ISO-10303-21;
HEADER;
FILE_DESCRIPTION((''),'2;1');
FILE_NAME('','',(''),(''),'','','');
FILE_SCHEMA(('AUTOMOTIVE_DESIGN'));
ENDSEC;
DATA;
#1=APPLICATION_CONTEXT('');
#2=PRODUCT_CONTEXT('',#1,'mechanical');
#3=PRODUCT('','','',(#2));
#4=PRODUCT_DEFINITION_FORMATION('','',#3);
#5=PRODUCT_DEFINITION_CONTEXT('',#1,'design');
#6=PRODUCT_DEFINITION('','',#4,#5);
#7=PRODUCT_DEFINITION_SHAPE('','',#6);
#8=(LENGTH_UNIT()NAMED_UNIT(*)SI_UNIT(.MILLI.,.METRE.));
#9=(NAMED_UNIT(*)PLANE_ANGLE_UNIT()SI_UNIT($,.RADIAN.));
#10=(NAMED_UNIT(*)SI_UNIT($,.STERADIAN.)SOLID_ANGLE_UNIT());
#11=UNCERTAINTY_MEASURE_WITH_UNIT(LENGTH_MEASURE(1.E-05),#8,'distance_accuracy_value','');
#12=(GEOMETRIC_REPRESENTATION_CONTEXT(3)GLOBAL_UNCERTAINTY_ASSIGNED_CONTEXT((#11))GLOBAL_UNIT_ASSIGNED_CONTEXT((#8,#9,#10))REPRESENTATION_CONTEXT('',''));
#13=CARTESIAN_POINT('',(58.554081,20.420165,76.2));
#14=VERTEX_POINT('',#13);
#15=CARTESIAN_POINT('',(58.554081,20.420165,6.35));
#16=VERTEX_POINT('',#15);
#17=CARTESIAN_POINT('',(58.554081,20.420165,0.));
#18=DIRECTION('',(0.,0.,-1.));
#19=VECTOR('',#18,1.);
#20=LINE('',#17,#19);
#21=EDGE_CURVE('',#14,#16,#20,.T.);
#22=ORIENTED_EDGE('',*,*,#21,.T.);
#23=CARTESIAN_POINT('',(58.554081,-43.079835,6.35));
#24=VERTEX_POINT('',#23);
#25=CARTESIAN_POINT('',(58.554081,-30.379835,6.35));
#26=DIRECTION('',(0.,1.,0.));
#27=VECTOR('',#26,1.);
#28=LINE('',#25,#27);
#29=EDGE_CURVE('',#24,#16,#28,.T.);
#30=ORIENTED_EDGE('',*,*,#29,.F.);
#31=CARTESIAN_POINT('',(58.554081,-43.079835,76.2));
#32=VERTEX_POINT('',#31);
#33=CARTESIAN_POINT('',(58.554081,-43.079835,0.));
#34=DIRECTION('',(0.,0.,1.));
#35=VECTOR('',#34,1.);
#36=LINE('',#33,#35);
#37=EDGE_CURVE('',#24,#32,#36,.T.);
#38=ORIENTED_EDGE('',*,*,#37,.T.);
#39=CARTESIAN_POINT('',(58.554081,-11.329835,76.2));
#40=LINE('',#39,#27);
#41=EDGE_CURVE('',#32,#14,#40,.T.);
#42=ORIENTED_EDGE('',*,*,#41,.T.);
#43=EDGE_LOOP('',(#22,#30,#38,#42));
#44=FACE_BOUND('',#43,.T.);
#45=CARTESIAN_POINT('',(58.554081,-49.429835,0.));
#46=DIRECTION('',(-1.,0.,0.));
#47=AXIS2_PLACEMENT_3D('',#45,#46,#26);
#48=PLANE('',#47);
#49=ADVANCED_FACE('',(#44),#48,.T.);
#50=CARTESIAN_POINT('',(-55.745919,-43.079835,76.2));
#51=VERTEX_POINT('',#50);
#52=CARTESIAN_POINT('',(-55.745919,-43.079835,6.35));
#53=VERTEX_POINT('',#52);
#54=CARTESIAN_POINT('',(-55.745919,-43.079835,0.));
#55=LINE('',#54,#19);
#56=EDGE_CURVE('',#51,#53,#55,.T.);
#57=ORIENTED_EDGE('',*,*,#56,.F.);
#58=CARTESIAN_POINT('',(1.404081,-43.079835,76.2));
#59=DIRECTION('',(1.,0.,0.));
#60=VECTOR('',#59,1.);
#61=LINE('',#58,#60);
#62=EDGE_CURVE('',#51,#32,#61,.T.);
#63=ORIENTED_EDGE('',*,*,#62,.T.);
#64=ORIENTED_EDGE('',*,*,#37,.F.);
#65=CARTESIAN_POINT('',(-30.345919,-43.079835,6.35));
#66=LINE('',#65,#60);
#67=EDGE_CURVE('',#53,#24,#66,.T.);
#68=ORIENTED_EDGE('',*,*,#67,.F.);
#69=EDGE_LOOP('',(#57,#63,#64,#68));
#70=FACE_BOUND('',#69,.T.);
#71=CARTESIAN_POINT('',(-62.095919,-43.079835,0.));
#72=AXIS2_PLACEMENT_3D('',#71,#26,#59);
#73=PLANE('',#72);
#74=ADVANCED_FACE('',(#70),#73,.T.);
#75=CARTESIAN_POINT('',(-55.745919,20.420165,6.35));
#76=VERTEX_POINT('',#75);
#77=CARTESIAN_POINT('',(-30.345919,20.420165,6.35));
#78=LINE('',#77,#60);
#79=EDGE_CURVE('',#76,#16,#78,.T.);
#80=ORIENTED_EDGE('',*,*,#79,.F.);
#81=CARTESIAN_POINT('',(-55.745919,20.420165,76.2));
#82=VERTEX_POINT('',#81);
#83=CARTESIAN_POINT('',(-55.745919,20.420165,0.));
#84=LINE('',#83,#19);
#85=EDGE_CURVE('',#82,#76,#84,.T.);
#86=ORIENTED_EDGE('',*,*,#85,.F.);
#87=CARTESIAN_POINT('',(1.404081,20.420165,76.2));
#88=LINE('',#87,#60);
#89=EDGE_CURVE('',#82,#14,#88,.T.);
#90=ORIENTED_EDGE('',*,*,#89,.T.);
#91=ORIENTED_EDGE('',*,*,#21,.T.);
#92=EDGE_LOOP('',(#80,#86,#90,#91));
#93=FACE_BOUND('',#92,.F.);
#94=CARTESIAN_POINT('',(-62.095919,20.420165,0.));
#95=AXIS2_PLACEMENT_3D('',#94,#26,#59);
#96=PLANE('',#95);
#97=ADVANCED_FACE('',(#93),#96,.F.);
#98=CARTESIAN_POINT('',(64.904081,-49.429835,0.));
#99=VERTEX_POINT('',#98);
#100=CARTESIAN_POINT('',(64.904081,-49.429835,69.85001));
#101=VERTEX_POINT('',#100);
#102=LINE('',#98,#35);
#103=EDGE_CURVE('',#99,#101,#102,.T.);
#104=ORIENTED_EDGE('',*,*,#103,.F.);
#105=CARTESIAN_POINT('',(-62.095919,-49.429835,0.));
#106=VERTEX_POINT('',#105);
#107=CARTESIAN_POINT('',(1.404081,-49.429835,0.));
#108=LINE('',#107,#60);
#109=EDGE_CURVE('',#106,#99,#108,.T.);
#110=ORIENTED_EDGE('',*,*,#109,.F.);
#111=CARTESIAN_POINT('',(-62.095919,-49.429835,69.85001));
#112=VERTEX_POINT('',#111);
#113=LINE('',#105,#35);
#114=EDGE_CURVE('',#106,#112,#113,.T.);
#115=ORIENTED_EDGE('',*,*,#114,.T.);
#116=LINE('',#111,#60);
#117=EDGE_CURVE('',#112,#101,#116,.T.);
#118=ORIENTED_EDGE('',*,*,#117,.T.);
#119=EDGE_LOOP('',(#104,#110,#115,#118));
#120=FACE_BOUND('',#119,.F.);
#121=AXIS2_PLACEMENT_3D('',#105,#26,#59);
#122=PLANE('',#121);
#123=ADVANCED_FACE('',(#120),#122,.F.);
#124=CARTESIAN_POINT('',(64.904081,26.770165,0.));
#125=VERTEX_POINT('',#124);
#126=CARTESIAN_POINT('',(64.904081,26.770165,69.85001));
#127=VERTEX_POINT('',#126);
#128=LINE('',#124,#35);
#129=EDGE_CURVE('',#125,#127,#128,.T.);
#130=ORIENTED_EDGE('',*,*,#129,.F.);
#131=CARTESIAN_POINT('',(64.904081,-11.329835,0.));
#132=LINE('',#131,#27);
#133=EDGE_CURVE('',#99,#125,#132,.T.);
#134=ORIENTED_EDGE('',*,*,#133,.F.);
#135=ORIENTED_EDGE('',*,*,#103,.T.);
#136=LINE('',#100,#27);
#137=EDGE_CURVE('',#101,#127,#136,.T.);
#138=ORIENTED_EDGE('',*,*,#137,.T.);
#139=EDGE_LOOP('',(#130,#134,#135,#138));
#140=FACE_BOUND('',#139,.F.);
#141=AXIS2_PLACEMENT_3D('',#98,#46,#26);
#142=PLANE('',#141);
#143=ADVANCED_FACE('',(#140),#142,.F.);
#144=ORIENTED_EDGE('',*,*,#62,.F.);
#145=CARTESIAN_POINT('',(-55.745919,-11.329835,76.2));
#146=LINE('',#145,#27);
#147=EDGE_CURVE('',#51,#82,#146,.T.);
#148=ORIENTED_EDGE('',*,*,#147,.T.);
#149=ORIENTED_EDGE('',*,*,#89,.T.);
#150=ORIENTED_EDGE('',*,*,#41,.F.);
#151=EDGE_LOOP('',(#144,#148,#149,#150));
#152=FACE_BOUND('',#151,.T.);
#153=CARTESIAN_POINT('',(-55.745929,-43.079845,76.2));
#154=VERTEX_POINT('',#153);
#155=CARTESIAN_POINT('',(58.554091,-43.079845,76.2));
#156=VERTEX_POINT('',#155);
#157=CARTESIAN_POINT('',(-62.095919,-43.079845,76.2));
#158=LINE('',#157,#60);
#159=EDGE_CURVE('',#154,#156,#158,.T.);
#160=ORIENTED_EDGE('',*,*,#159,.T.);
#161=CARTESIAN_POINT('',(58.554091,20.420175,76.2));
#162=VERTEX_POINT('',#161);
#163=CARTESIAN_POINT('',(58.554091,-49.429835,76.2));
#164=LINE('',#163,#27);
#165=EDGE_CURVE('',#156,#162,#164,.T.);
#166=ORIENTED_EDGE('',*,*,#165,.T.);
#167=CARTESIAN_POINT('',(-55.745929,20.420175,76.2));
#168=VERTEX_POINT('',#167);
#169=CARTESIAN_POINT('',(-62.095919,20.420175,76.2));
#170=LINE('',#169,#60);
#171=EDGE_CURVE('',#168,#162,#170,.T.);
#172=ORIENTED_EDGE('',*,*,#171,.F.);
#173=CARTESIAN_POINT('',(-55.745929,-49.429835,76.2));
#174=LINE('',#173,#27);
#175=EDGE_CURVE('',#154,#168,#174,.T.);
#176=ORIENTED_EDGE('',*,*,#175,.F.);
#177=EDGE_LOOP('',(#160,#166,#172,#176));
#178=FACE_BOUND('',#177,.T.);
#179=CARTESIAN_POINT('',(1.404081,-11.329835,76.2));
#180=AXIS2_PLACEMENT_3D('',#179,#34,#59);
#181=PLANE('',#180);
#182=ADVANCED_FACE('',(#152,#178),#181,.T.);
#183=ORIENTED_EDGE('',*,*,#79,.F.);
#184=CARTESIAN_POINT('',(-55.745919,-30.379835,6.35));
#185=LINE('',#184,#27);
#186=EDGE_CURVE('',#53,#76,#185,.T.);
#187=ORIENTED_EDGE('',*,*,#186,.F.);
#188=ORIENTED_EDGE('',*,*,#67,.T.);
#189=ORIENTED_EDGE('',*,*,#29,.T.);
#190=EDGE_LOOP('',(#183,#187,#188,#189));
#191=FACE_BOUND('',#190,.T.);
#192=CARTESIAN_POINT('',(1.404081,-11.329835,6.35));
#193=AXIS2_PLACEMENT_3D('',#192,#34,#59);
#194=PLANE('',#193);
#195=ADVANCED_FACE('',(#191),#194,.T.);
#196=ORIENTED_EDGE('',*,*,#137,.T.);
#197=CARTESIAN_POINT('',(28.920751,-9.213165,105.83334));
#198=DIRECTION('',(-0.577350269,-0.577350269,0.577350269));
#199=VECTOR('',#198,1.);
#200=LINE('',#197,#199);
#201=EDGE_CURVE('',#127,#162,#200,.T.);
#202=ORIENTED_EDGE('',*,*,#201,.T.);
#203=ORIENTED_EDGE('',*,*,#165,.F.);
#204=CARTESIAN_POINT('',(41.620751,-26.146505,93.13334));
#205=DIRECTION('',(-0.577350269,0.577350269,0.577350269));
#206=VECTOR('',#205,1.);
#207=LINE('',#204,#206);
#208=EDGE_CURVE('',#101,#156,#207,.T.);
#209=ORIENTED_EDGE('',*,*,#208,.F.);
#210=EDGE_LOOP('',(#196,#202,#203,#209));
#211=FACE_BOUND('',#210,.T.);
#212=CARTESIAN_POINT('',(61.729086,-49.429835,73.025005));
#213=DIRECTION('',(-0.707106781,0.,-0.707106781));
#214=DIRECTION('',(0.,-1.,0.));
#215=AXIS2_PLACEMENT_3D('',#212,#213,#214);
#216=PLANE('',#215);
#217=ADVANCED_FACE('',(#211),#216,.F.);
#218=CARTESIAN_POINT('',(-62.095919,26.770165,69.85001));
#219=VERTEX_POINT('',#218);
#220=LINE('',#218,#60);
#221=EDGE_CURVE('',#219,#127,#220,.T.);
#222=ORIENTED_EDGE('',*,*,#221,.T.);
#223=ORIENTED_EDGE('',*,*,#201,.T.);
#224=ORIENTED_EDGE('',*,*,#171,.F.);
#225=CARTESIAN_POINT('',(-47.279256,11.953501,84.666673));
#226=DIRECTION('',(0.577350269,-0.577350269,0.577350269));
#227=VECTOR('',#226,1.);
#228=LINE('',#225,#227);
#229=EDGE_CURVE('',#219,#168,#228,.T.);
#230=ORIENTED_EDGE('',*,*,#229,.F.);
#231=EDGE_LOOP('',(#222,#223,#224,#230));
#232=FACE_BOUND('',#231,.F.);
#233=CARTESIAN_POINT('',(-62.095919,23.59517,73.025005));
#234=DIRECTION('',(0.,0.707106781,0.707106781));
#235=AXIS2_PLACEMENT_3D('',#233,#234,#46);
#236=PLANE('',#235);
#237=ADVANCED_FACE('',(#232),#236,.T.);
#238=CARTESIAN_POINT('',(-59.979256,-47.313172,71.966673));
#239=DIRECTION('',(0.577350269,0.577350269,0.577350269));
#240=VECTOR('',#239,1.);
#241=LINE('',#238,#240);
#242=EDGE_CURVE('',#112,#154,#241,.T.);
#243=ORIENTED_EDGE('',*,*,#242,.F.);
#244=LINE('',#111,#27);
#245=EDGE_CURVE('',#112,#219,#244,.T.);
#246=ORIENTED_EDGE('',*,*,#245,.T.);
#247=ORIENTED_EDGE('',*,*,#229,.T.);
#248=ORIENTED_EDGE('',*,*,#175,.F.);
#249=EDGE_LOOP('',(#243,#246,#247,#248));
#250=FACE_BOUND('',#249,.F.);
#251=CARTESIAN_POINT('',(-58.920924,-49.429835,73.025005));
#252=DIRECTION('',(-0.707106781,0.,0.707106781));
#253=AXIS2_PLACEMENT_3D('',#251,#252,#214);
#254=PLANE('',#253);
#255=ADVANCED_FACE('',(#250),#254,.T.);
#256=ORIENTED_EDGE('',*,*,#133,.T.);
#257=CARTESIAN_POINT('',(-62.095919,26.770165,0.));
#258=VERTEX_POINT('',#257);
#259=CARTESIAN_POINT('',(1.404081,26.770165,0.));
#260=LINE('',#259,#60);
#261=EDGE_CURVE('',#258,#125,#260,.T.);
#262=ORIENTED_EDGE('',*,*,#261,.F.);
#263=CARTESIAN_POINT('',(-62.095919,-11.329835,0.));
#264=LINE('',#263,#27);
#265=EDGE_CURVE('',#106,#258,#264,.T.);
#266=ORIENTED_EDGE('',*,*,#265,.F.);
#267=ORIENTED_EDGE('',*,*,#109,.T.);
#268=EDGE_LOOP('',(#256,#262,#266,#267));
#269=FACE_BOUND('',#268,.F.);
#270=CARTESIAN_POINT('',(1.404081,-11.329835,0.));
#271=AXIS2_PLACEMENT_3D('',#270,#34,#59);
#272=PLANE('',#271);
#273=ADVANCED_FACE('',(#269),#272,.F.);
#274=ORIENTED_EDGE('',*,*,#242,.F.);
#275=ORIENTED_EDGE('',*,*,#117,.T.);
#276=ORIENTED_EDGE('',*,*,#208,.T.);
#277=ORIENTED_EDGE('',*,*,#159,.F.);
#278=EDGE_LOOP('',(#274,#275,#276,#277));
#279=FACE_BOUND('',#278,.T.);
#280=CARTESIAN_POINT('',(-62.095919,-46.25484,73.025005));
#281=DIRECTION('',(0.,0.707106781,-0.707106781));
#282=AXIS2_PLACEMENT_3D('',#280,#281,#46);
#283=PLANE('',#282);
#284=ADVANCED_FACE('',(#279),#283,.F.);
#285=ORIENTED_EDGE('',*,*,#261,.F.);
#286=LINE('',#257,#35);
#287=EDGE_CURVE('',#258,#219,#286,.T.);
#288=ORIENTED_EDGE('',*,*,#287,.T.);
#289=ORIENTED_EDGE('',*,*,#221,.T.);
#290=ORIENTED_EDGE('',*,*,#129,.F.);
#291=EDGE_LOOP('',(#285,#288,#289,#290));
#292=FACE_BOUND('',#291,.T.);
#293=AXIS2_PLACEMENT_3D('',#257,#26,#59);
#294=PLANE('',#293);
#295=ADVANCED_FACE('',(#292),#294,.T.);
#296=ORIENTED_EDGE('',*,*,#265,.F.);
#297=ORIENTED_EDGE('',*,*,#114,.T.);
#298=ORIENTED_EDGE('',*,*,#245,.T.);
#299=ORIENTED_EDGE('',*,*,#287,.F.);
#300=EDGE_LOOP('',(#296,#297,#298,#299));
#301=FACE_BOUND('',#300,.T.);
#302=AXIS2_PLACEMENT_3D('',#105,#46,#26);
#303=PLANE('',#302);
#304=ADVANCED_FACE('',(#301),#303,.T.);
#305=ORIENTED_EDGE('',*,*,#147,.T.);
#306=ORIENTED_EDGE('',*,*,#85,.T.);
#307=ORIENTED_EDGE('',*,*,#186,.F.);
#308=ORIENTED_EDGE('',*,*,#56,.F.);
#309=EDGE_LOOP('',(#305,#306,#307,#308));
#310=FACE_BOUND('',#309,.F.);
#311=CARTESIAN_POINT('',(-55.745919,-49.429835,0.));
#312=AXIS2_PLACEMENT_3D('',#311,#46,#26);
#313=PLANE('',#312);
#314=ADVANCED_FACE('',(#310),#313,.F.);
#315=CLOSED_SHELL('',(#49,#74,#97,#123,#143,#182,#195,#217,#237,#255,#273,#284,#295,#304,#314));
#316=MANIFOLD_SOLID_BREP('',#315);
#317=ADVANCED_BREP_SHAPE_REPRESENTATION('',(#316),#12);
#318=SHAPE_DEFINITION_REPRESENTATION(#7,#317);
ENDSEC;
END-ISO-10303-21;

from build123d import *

# Parameters (mm, degrees)
F0_W     = 127
F0_H     = 76.2
F1_DEPTH = 76.2
F2_T     = -6.35
F3_SIZE  = 6.34999


# Not quite as in the source:
# - a fillet or chamfer is up to 0.001 mm smaller than in the source, because OpenCascade refuses the exact size


with BuildPart() as f1:
    # F0 (on Top) → F1 (new body)
    with BuildSketch(Plane.XY):
        with Locations((1.4040806768, -11.3298352808)):
            Rectangle(F0_W, F0_H)
    extrude(amount=F1_DEPTH)

    # F2
    f2_openings = [f1.faces().sort_by_distance(p)[0] for p in [
        (1.404081, -11.329835, 76.2),
    ]]
    offset(amount=F2_T, openings=f2_openings)

    # F3 (size 6.35 in the source; OpenCascade refuses exactly that, so slightly less here)
    f3_edges = [f1.edges().sort_by_distance(p)[0] for p in [
        (1.404081, -49.429835, 76.2),
        (1.404081, 26.770165, 76.2),
        (64.904081, -11.329835, 76.2),
        (-62.095919, -11.329835, 76.2),
    ]]
    chamfer(f3_edges, length=F3_SIZE)


solid = f1.part
